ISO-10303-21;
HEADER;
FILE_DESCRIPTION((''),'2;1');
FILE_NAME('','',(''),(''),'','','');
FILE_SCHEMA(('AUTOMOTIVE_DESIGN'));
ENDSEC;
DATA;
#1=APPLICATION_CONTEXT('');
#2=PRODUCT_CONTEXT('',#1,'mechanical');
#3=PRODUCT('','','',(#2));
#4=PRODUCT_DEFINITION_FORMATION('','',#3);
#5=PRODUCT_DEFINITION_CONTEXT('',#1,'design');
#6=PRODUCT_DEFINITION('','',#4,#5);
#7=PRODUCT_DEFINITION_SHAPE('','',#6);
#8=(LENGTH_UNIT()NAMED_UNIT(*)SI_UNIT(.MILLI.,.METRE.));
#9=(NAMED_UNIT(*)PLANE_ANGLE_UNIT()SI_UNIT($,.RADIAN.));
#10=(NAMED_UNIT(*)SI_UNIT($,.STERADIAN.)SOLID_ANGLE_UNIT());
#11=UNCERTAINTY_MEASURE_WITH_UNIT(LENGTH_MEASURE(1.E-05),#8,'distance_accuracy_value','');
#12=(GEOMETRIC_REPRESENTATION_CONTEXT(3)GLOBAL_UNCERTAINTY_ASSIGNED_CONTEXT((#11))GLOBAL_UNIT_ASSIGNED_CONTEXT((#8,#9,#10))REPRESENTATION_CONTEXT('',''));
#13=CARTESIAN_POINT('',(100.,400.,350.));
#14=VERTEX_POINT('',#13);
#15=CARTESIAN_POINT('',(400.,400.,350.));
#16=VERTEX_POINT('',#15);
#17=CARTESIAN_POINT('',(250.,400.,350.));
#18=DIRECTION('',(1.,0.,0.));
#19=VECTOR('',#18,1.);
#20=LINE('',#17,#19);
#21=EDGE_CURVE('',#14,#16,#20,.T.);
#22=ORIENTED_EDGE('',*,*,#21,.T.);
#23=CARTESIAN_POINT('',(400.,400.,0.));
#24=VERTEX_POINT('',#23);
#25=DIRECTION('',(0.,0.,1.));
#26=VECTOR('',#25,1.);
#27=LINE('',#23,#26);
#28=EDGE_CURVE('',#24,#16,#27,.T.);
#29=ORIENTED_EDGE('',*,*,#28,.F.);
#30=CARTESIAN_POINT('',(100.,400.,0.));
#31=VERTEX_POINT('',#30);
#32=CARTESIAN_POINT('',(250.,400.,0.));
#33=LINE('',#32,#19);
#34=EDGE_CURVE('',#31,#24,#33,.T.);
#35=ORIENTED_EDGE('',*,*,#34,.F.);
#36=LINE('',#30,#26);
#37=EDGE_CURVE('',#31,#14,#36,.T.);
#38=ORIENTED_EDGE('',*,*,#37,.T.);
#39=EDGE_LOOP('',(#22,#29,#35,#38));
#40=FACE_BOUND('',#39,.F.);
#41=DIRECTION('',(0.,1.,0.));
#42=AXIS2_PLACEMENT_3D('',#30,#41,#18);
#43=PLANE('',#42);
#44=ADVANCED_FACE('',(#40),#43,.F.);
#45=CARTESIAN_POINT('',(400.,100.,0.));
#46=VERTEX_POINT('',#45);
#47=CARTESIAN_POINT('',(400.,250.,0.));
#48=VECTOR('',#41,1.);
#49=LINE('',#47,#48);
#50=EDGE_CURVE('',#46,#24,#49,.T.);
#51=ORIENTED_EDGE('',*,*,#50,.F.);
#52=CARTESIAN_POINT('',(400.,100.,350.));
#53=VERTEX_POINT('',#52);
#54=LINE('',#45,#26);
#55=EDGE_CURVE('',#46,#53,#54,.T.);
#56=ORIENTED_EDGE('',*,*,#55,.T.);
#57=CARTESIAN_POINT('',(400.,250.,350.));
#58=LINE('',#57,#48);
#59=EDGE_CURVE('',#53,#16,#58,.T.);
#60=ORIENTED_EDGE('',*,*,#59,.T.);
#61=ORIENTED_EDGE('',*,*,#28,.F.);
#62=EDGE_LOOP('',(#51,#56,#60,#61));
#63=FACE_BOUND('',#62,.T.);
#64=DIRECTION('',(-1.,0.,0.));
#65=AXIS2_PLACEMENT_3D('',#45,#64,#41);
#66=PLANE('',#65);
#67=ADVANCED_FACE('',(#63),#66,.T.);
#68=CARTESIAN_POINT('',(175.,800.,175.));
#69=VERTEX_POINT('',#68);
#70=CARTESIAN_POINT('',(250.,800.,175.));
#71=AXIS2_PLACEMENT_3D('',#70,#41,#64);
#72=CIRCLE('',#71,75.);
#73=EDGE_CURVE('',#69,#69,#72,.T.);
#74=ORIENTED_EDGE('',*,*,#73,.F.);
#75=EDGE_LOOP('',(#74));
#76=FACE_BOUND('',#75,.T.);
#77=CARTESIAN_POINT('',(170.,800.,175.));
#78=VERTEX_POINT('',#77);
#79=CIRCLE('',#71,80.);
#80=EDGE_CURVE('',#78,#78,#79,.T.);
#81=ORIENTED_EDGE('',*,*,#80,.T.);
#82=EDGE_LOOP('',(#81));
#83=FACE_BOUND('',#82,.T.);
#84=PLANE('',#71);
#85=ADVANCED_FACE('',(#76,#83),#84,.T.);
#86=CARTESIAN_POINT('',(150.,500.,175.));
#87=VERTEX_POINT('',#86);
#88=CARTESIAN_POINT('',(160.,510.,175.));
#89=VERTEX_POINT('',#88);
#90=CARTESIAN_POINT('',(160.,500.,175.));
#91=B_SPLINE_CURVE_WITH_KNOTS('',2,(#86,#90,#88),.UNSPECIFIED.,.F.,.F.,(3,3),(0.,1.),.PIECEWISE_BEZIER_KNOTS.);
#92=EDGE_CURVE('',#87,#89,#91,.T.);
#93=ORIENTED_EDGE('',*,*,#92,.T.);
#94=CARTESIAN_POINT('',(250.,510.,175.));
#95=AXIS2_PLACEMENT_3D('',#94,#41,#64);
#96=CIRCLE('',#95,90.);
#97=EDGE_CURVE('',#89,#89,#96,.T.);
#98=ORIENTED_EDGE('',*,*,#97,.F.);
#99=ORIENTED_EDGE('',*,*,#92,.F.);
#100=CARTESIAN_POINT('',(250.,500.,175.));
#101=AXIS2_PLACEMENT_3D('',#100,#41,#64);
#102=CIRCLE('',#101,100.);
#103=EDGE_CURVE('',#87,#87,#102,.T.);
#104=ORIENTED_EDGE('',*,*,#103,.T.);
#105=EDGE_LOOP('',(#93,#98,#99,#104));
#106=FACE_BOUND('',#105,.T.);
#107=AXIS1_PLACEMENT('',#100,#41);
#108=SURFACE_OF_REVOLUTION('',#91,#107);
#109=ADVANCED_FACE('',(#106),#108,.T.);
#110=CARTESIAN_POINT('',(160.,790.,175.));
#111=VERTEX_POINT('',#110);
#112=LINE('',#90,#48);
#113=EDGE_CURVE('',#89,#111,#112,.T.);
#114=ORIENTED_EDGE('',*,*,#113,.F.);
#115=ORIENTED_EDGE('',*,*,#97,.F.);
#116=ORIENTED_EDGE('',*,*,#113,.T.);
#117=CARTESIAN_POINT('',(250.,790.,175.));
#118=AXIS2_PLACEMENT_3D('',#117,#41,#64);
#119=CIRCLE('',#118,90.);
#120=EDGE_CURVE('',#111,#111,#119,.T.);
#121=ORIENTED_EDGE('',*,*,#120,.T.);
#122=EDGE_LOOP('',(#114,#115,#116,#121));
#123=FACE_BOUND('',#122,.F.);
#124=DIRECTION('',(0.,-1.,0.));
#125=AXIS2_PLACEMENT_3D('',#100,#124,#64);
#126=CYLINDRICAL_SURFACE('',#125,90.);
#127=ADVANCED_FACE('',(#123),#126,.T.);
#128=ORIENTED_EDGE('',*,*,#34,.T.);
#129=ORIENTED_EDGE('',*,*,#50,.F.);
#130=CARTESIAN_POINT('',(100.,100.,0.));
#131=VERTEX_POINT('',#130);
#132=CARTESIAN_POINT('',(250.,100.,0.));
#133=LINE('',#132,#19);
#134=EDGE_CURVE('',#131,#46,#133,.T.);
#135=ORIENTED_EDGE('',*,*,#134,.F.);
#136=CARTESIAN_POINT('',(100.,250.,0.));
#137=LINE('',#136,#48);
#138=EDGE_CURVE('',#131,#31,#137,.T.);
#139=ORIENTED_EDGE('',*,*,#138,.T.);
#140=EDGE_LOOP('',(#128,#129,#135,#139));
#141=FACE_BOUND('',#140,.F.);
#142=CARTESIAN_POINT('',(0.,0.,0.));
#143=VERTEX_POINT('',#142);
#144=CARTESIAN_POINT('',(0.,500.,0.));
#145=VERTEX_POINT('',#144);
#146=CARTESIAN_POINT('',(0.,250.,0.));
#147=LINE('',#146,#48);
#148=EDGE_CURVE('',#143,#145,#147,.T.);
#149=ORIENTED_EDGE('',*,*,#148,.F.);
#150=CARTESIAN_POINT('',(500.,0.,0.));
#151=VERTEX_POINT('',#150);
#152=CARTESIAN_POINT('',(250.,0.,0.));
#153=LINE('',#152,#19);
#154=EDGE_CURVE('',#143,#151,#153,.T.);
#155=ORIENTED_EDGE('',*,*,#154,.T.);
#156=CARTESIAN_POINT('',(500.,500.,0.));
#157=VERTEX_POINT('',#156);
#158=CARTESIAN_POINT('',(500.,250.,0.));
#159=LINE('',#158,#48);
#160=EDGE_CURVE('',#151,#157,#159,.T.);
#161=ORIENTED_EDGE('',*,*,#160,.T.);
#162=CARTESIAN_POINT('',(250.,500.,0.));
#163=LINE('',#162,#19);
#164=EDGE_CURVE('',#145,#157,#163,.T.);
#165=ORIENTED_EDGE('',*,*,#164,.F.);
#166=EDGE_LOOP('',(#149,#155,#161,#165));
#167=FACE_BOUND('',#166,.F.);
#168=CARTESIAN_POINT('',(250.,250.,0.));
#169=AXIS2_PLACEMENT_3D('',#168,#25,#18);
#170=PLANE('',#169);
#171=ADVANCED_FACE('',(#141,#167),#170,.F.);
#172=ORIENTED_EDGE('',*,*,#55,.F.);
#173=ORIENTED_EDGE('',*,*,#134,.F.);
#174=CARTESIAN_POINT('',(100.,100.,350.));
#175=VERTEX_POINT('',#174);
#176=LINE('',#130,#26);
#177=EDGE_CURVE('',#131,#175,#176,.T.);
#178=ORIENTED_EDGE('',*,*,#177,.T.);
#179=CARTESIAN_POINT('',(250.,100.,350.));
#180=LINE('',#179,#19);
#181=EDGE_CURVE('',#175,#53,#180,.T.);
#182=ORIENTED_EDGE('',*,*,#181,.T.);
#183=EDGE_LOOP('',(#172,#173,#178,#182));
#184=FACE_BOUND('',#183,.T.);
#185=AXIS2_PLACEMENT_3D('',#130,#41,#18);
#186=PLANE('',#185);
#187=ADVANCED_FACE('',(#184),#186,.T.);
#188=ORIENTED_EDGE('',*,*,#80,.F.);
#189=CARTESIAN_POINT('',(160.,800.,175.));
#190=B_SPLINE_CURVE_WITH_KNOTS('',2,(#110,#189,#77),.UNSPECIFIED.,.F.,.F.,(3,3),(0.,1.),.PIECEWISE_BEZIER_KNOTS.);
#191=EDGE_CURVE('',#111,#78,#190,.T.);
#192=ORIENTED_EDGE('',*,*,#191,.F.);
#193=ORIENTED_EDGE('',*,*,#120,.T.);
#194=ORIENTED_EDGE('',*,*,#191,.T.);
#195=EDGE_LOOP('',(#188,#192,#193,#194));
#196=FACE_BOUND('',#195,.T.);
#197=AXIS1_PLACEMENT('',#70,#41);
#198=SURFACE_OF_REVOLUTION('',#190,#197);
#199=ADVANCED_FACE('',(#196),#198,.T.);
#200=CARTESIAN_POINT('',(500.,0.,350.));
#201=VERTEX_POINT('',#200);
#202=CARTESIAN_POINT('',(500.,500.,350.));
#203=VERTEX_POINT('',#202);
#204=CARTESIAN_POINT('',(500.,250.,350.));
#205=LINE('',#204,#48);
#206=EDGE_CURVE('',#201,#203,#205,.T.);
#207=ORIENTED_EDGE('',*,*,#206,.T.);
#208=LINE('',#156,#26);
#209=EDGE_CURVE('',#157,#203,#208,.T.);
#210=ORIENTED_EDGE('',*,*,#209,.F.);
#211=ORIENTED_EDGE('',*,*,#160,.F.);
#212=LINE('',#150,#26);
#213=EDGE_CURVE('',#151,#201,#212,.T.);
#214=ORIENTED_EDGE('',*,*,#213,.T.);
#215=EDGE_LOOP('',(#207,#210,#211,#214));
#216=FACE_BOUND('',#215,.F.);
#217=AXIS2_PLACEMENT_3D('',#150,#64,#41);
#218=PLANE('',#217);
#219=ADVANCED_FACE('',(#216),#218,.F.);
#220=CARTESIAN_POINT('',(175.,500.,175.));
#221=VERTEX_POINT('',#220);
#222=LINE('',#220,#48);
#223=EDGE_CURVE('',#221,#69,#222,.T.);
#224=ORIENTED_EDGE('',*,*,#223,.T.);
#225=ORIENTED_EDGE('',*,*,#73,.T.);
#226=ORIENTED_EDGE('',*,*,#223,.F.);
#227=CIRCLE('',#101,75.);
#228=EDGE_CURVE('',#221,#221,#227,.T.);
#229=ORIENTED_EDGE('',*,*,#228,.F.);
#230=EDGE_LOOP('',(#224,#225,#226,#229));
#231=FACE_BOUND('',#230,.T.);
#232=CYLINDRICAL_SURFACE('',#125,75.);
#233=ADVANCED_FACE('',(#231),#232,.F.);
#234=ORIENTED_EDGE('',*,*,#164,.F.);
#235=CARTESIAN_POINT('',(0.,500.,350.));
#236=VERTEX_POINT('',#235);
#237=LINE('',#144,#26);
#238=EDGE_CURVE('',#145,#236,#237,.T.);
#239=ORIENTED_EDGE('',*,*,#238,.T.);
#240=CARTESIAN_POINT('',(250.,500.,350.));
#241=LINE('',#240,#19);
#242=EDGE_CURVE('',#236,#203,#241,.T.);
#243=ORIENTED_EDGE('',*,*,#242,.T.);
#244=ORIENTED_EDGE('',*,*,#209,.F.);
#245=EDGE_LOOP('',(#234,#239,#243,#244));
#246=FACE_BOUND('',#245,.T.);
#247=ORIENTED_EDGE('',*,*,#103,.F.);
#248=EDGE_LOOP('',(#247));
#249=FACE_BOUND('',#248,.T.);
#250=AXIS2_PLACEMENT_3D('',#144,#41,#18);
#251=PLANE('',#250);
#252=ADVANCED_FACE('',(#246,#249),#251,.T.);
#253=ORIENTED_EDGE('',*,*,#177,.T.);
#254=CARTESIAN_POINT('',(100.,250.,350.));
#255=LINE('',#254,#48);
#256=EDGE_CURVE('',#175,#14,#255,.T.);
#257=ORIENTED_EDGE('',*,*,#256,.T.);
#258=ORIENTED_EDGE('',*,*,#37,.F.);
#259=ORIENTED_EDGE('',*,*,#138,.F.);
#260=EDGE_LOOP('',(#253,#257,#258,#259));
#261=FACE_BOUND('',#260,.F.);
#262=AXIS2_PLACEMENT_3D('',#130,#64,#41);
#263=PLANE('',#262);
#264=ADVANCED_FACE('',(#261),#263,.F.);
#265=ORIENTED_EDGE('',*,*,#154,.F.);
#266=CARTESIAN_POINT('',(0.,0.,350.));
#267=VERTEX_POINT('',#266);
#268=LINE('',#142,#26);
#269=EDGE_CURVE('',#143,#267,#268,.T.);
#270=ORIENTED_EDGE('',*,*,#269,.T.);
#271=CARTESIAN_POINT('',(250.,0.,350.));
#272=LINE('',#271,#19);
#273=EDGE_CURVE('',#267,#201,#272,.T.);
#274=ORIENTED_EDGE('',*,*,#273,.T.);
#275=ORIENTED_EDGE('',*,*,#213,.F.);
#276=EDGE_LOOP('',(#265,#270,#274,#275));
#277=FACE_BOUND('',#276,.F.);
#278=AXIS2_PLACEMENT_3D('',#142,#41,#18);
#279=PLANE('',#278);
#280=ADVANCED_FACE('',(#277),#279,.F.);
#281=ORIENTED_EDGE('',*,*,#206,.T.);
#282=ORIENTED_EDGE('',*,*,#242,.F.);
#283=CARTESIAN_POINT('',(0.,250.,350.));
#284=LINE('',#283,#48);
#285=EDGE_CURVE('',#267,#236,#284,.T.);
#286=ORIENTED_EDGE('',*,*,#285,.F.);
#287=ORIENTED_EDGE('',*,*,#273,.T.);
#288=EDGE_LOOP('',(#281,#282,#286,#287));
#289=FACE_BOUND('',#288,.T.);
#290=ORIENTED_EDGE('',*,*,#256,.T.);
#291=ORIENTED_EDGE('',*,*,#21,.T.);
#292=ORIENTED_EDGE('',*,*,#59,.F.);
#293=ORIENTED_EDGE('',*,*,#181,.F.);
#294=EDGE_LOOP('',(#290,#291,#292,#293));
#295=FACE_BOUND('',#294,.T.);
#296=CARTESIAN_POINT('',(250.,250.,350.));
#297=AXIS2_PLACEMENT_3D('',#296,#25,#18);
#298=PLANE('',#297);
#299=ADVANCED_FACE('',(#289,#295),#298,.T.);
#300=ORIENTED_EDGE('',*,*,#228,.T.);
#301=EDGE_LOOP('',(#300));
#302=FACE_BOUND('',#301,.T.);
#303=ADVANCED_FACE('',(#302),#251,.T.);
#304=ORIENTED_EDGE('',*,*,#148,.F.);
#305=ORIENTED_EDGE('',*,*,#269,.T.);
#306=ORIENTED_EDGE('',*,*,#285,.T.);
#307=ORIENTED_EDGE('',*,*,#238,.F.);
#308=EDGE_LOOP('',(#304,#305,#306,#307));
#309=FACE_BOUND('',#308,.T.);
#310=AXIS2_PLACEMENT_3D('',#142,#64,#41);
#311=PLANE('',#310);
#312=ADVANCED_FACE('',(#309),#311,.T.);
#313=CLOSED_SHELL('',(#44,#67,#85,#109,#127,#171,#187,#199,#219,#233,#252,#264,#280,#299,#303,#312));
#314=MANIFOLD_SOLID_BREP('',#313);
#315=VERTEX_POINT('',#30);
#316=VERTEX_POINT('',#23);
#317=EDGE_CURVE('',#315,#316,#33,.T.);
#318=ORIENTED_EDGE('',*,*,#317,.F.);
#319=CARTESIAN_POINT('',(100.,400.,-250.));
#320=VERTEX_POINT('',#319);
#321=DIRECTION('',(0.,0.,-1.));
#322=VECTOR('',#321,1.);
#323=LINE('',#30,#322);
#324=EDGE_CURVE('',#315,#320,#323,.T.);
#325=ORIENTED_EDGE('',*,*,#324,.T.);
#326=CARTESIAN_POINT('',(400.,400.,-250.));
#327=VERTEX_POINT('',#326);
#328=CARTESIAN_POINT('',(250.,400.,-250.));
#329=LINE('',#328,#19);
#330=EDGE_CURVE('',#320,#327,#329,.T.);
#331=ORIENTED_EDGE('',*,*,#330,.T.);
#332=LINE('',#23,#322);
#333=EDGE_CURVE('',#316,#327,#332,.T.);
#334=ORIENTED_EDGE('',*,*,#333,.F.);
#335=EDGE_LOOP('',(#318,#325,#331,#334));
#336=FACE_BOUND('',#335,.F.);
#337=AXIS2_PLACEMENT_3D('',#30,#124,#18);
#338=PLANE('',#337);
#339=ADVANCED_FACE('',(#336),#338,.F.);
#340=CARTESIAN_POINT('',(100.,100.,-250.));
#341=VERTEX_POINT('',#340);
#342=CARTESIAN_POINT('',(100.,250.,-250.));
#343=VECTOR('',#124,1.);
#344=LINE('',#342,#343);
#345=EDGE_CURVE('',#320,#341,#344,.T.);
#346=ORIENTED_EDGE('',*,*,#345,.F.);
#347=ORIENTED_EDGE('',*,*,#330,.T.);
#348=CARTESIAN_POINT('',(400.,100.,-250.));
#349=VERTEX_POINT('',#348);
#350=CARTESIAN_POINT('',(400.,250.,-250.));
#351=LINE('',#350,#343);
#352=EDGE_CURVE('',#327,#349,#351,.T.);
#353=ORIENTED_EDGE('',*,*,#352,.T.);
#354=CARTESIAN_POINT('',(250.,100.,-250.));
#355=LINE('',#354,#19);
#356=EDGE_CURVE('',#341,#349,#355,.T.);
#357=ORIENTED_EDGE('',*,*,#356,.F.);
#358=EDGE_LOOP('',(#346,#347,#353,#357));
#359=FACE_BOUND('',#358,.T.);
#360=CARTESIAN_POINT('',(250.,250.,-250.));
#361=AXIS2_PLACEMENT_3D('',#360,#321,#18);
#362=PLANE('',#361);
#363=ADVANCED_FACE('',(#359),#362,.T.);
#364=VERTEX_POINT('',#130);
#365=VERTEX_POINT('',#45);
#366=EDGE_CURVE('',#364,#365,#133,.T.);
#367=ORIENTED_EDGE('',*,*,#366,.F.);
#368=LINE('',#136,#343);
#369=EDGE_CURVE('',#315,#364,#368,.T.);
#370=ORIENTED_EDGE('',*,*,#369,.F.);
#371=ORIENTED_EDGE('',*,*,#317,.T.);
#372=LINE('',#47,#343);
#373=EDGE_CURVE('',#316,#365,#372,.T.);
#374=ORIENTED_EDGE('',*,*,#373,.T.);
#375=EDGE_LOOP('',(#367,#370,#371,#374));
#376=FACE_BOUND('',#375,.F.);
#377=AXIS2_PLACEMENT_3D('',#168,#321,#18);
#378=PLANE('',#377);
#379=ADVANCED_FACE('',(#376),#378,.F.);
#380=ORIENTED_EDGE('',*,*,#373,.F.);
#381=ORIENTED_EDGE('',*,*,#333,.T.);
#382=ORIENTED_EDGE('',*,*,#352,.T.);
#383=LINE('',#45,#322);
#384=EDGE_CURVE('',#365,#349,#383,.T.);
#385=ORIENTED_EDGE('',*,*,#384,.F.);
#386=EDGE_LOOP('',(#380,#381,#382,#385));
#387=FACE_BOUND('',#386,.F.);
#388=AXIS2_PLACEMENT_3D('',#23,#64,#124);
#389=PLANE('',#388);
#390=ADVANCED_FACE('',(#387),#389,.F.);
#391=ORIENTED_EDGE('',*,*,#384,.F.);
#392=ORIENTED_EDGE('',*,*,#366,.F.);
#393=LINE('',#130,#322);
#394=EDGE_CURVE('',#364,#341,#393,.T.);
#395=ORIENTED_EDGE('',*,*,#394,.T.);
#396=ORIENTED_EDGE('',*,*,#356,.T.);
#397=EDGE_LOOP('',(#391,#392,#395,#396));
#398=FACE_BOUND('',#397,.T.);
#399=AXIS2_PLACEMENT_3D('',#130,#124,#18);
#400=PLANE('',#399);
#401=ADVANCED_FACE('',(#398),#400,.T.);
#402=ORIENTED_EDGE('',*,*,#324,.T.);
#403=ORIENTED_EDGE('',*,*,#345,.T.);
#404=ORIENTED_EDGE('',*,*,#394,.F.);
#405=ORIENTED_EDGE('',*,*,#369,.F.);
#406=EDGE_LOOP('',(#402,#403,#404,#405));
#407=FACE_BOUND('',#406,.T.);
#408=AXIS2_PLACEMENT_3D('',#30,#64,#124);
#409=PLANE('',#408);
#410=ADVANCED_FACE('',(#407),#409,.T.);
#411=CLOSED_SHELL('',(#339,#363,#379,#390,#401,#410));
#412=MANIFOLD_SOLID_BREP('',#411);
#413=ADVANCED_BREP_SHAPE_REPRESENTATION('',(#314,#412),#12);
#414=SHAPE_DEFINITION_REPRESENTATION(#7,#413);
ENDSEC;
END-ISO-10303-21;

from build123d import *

# Parameters (mm, degrees)
F0_W     = 500
F0_H     = 500
F0_W_2   = 300
F0_H_2   = 300
F1_DEPTH = 350
F2_W     = 300
F2_H     = 300
F3_DEPTH = 250
F4_R     = 90
F4_R_2   = 75
F5_DEPTH = 300


# Not quite as in the source:
# - a fillet or chamfer that OpenCascade refuses, or shapes differently, is made with other operations: its cross-section is extruded or revolved along the edge and cut away or added


with BuildPart() as f1:
    # F0 (on Top) → F1 (new body)
    with BuildSketch(Plane.XY):
        with Locations((250, 250)):
            Rectangle(F0_W, F0_H)
        with Locations((250, 250)):
            Rectangle(F0_W_2, F0_H_2, mode=Mode.SUBTRACT)
    extrude(amount=F1_DEPTH)

    # F4 (on face) → F5 (join)
    with BuildSketch(Plane(origin=(0, 500, 0), x_dir=(-1, 0, 0), z_dir=(0, 1, 0))):
        with Locations((-250, 175)):
            Circle(F4_R)
        with Locations((-250, 175)):
            Circle(F4_R_2, mode=Mode.SUBTRACT)
    extrude(amount=F5_DEPTH)

    # F6: fillet of radius 10 on 3 edges, made by hand

    # F6_s1 → F6_t2 (revolve)
    with BuildSketch(Plane.XY.offset(175)):
        with BuildLine():
            add(Edge.make_bspline(
                [(150, 500), (160, 500), (160, 510)],
                knots=[0, 0, 0, 1, 1, 1], degree=2, weights=[1, 1, 1]))
            Line((160, 510), (160, 500))
            Line((160, 500), (150, 500))
        make_face()
    revolve(axis=Axis((250, 500, 175), (0, 1, 0)))

    # F6_s3 → F6_t4 (revolve, cut)
    with BuildSketch(Plane.XY.offset(175)):
        with BuildLine():
            add(Edge.make_bspline(
                [(160, 790), (160, 800), (170, 800)],
                knots=[0, 0, 0, 1, 1, 1], degree=2, weights=[1, 1, 1]))
            Line((170, 800), (160, 800))
            Line((160, 800), (160, 790))
        make_face()
    revolve(axis=Axis((250, 800, 175), (0, 1, 0)), mode=Mode.SUBTRACT)


with BuildPart() as f3:
    # F2 (on face) → F3 (new body)
    with BuildSketch(Plane(origin=(0, 0, 0), x_dir=(1, 0, 0), z_dir=(0, 0, -1))):
        with Locations((250, -250)):
            Rectangle(F2_W, F2_H)
    extrude(amount=F3_DEPTH)


solid = Compound([f1.part, f3.part])
